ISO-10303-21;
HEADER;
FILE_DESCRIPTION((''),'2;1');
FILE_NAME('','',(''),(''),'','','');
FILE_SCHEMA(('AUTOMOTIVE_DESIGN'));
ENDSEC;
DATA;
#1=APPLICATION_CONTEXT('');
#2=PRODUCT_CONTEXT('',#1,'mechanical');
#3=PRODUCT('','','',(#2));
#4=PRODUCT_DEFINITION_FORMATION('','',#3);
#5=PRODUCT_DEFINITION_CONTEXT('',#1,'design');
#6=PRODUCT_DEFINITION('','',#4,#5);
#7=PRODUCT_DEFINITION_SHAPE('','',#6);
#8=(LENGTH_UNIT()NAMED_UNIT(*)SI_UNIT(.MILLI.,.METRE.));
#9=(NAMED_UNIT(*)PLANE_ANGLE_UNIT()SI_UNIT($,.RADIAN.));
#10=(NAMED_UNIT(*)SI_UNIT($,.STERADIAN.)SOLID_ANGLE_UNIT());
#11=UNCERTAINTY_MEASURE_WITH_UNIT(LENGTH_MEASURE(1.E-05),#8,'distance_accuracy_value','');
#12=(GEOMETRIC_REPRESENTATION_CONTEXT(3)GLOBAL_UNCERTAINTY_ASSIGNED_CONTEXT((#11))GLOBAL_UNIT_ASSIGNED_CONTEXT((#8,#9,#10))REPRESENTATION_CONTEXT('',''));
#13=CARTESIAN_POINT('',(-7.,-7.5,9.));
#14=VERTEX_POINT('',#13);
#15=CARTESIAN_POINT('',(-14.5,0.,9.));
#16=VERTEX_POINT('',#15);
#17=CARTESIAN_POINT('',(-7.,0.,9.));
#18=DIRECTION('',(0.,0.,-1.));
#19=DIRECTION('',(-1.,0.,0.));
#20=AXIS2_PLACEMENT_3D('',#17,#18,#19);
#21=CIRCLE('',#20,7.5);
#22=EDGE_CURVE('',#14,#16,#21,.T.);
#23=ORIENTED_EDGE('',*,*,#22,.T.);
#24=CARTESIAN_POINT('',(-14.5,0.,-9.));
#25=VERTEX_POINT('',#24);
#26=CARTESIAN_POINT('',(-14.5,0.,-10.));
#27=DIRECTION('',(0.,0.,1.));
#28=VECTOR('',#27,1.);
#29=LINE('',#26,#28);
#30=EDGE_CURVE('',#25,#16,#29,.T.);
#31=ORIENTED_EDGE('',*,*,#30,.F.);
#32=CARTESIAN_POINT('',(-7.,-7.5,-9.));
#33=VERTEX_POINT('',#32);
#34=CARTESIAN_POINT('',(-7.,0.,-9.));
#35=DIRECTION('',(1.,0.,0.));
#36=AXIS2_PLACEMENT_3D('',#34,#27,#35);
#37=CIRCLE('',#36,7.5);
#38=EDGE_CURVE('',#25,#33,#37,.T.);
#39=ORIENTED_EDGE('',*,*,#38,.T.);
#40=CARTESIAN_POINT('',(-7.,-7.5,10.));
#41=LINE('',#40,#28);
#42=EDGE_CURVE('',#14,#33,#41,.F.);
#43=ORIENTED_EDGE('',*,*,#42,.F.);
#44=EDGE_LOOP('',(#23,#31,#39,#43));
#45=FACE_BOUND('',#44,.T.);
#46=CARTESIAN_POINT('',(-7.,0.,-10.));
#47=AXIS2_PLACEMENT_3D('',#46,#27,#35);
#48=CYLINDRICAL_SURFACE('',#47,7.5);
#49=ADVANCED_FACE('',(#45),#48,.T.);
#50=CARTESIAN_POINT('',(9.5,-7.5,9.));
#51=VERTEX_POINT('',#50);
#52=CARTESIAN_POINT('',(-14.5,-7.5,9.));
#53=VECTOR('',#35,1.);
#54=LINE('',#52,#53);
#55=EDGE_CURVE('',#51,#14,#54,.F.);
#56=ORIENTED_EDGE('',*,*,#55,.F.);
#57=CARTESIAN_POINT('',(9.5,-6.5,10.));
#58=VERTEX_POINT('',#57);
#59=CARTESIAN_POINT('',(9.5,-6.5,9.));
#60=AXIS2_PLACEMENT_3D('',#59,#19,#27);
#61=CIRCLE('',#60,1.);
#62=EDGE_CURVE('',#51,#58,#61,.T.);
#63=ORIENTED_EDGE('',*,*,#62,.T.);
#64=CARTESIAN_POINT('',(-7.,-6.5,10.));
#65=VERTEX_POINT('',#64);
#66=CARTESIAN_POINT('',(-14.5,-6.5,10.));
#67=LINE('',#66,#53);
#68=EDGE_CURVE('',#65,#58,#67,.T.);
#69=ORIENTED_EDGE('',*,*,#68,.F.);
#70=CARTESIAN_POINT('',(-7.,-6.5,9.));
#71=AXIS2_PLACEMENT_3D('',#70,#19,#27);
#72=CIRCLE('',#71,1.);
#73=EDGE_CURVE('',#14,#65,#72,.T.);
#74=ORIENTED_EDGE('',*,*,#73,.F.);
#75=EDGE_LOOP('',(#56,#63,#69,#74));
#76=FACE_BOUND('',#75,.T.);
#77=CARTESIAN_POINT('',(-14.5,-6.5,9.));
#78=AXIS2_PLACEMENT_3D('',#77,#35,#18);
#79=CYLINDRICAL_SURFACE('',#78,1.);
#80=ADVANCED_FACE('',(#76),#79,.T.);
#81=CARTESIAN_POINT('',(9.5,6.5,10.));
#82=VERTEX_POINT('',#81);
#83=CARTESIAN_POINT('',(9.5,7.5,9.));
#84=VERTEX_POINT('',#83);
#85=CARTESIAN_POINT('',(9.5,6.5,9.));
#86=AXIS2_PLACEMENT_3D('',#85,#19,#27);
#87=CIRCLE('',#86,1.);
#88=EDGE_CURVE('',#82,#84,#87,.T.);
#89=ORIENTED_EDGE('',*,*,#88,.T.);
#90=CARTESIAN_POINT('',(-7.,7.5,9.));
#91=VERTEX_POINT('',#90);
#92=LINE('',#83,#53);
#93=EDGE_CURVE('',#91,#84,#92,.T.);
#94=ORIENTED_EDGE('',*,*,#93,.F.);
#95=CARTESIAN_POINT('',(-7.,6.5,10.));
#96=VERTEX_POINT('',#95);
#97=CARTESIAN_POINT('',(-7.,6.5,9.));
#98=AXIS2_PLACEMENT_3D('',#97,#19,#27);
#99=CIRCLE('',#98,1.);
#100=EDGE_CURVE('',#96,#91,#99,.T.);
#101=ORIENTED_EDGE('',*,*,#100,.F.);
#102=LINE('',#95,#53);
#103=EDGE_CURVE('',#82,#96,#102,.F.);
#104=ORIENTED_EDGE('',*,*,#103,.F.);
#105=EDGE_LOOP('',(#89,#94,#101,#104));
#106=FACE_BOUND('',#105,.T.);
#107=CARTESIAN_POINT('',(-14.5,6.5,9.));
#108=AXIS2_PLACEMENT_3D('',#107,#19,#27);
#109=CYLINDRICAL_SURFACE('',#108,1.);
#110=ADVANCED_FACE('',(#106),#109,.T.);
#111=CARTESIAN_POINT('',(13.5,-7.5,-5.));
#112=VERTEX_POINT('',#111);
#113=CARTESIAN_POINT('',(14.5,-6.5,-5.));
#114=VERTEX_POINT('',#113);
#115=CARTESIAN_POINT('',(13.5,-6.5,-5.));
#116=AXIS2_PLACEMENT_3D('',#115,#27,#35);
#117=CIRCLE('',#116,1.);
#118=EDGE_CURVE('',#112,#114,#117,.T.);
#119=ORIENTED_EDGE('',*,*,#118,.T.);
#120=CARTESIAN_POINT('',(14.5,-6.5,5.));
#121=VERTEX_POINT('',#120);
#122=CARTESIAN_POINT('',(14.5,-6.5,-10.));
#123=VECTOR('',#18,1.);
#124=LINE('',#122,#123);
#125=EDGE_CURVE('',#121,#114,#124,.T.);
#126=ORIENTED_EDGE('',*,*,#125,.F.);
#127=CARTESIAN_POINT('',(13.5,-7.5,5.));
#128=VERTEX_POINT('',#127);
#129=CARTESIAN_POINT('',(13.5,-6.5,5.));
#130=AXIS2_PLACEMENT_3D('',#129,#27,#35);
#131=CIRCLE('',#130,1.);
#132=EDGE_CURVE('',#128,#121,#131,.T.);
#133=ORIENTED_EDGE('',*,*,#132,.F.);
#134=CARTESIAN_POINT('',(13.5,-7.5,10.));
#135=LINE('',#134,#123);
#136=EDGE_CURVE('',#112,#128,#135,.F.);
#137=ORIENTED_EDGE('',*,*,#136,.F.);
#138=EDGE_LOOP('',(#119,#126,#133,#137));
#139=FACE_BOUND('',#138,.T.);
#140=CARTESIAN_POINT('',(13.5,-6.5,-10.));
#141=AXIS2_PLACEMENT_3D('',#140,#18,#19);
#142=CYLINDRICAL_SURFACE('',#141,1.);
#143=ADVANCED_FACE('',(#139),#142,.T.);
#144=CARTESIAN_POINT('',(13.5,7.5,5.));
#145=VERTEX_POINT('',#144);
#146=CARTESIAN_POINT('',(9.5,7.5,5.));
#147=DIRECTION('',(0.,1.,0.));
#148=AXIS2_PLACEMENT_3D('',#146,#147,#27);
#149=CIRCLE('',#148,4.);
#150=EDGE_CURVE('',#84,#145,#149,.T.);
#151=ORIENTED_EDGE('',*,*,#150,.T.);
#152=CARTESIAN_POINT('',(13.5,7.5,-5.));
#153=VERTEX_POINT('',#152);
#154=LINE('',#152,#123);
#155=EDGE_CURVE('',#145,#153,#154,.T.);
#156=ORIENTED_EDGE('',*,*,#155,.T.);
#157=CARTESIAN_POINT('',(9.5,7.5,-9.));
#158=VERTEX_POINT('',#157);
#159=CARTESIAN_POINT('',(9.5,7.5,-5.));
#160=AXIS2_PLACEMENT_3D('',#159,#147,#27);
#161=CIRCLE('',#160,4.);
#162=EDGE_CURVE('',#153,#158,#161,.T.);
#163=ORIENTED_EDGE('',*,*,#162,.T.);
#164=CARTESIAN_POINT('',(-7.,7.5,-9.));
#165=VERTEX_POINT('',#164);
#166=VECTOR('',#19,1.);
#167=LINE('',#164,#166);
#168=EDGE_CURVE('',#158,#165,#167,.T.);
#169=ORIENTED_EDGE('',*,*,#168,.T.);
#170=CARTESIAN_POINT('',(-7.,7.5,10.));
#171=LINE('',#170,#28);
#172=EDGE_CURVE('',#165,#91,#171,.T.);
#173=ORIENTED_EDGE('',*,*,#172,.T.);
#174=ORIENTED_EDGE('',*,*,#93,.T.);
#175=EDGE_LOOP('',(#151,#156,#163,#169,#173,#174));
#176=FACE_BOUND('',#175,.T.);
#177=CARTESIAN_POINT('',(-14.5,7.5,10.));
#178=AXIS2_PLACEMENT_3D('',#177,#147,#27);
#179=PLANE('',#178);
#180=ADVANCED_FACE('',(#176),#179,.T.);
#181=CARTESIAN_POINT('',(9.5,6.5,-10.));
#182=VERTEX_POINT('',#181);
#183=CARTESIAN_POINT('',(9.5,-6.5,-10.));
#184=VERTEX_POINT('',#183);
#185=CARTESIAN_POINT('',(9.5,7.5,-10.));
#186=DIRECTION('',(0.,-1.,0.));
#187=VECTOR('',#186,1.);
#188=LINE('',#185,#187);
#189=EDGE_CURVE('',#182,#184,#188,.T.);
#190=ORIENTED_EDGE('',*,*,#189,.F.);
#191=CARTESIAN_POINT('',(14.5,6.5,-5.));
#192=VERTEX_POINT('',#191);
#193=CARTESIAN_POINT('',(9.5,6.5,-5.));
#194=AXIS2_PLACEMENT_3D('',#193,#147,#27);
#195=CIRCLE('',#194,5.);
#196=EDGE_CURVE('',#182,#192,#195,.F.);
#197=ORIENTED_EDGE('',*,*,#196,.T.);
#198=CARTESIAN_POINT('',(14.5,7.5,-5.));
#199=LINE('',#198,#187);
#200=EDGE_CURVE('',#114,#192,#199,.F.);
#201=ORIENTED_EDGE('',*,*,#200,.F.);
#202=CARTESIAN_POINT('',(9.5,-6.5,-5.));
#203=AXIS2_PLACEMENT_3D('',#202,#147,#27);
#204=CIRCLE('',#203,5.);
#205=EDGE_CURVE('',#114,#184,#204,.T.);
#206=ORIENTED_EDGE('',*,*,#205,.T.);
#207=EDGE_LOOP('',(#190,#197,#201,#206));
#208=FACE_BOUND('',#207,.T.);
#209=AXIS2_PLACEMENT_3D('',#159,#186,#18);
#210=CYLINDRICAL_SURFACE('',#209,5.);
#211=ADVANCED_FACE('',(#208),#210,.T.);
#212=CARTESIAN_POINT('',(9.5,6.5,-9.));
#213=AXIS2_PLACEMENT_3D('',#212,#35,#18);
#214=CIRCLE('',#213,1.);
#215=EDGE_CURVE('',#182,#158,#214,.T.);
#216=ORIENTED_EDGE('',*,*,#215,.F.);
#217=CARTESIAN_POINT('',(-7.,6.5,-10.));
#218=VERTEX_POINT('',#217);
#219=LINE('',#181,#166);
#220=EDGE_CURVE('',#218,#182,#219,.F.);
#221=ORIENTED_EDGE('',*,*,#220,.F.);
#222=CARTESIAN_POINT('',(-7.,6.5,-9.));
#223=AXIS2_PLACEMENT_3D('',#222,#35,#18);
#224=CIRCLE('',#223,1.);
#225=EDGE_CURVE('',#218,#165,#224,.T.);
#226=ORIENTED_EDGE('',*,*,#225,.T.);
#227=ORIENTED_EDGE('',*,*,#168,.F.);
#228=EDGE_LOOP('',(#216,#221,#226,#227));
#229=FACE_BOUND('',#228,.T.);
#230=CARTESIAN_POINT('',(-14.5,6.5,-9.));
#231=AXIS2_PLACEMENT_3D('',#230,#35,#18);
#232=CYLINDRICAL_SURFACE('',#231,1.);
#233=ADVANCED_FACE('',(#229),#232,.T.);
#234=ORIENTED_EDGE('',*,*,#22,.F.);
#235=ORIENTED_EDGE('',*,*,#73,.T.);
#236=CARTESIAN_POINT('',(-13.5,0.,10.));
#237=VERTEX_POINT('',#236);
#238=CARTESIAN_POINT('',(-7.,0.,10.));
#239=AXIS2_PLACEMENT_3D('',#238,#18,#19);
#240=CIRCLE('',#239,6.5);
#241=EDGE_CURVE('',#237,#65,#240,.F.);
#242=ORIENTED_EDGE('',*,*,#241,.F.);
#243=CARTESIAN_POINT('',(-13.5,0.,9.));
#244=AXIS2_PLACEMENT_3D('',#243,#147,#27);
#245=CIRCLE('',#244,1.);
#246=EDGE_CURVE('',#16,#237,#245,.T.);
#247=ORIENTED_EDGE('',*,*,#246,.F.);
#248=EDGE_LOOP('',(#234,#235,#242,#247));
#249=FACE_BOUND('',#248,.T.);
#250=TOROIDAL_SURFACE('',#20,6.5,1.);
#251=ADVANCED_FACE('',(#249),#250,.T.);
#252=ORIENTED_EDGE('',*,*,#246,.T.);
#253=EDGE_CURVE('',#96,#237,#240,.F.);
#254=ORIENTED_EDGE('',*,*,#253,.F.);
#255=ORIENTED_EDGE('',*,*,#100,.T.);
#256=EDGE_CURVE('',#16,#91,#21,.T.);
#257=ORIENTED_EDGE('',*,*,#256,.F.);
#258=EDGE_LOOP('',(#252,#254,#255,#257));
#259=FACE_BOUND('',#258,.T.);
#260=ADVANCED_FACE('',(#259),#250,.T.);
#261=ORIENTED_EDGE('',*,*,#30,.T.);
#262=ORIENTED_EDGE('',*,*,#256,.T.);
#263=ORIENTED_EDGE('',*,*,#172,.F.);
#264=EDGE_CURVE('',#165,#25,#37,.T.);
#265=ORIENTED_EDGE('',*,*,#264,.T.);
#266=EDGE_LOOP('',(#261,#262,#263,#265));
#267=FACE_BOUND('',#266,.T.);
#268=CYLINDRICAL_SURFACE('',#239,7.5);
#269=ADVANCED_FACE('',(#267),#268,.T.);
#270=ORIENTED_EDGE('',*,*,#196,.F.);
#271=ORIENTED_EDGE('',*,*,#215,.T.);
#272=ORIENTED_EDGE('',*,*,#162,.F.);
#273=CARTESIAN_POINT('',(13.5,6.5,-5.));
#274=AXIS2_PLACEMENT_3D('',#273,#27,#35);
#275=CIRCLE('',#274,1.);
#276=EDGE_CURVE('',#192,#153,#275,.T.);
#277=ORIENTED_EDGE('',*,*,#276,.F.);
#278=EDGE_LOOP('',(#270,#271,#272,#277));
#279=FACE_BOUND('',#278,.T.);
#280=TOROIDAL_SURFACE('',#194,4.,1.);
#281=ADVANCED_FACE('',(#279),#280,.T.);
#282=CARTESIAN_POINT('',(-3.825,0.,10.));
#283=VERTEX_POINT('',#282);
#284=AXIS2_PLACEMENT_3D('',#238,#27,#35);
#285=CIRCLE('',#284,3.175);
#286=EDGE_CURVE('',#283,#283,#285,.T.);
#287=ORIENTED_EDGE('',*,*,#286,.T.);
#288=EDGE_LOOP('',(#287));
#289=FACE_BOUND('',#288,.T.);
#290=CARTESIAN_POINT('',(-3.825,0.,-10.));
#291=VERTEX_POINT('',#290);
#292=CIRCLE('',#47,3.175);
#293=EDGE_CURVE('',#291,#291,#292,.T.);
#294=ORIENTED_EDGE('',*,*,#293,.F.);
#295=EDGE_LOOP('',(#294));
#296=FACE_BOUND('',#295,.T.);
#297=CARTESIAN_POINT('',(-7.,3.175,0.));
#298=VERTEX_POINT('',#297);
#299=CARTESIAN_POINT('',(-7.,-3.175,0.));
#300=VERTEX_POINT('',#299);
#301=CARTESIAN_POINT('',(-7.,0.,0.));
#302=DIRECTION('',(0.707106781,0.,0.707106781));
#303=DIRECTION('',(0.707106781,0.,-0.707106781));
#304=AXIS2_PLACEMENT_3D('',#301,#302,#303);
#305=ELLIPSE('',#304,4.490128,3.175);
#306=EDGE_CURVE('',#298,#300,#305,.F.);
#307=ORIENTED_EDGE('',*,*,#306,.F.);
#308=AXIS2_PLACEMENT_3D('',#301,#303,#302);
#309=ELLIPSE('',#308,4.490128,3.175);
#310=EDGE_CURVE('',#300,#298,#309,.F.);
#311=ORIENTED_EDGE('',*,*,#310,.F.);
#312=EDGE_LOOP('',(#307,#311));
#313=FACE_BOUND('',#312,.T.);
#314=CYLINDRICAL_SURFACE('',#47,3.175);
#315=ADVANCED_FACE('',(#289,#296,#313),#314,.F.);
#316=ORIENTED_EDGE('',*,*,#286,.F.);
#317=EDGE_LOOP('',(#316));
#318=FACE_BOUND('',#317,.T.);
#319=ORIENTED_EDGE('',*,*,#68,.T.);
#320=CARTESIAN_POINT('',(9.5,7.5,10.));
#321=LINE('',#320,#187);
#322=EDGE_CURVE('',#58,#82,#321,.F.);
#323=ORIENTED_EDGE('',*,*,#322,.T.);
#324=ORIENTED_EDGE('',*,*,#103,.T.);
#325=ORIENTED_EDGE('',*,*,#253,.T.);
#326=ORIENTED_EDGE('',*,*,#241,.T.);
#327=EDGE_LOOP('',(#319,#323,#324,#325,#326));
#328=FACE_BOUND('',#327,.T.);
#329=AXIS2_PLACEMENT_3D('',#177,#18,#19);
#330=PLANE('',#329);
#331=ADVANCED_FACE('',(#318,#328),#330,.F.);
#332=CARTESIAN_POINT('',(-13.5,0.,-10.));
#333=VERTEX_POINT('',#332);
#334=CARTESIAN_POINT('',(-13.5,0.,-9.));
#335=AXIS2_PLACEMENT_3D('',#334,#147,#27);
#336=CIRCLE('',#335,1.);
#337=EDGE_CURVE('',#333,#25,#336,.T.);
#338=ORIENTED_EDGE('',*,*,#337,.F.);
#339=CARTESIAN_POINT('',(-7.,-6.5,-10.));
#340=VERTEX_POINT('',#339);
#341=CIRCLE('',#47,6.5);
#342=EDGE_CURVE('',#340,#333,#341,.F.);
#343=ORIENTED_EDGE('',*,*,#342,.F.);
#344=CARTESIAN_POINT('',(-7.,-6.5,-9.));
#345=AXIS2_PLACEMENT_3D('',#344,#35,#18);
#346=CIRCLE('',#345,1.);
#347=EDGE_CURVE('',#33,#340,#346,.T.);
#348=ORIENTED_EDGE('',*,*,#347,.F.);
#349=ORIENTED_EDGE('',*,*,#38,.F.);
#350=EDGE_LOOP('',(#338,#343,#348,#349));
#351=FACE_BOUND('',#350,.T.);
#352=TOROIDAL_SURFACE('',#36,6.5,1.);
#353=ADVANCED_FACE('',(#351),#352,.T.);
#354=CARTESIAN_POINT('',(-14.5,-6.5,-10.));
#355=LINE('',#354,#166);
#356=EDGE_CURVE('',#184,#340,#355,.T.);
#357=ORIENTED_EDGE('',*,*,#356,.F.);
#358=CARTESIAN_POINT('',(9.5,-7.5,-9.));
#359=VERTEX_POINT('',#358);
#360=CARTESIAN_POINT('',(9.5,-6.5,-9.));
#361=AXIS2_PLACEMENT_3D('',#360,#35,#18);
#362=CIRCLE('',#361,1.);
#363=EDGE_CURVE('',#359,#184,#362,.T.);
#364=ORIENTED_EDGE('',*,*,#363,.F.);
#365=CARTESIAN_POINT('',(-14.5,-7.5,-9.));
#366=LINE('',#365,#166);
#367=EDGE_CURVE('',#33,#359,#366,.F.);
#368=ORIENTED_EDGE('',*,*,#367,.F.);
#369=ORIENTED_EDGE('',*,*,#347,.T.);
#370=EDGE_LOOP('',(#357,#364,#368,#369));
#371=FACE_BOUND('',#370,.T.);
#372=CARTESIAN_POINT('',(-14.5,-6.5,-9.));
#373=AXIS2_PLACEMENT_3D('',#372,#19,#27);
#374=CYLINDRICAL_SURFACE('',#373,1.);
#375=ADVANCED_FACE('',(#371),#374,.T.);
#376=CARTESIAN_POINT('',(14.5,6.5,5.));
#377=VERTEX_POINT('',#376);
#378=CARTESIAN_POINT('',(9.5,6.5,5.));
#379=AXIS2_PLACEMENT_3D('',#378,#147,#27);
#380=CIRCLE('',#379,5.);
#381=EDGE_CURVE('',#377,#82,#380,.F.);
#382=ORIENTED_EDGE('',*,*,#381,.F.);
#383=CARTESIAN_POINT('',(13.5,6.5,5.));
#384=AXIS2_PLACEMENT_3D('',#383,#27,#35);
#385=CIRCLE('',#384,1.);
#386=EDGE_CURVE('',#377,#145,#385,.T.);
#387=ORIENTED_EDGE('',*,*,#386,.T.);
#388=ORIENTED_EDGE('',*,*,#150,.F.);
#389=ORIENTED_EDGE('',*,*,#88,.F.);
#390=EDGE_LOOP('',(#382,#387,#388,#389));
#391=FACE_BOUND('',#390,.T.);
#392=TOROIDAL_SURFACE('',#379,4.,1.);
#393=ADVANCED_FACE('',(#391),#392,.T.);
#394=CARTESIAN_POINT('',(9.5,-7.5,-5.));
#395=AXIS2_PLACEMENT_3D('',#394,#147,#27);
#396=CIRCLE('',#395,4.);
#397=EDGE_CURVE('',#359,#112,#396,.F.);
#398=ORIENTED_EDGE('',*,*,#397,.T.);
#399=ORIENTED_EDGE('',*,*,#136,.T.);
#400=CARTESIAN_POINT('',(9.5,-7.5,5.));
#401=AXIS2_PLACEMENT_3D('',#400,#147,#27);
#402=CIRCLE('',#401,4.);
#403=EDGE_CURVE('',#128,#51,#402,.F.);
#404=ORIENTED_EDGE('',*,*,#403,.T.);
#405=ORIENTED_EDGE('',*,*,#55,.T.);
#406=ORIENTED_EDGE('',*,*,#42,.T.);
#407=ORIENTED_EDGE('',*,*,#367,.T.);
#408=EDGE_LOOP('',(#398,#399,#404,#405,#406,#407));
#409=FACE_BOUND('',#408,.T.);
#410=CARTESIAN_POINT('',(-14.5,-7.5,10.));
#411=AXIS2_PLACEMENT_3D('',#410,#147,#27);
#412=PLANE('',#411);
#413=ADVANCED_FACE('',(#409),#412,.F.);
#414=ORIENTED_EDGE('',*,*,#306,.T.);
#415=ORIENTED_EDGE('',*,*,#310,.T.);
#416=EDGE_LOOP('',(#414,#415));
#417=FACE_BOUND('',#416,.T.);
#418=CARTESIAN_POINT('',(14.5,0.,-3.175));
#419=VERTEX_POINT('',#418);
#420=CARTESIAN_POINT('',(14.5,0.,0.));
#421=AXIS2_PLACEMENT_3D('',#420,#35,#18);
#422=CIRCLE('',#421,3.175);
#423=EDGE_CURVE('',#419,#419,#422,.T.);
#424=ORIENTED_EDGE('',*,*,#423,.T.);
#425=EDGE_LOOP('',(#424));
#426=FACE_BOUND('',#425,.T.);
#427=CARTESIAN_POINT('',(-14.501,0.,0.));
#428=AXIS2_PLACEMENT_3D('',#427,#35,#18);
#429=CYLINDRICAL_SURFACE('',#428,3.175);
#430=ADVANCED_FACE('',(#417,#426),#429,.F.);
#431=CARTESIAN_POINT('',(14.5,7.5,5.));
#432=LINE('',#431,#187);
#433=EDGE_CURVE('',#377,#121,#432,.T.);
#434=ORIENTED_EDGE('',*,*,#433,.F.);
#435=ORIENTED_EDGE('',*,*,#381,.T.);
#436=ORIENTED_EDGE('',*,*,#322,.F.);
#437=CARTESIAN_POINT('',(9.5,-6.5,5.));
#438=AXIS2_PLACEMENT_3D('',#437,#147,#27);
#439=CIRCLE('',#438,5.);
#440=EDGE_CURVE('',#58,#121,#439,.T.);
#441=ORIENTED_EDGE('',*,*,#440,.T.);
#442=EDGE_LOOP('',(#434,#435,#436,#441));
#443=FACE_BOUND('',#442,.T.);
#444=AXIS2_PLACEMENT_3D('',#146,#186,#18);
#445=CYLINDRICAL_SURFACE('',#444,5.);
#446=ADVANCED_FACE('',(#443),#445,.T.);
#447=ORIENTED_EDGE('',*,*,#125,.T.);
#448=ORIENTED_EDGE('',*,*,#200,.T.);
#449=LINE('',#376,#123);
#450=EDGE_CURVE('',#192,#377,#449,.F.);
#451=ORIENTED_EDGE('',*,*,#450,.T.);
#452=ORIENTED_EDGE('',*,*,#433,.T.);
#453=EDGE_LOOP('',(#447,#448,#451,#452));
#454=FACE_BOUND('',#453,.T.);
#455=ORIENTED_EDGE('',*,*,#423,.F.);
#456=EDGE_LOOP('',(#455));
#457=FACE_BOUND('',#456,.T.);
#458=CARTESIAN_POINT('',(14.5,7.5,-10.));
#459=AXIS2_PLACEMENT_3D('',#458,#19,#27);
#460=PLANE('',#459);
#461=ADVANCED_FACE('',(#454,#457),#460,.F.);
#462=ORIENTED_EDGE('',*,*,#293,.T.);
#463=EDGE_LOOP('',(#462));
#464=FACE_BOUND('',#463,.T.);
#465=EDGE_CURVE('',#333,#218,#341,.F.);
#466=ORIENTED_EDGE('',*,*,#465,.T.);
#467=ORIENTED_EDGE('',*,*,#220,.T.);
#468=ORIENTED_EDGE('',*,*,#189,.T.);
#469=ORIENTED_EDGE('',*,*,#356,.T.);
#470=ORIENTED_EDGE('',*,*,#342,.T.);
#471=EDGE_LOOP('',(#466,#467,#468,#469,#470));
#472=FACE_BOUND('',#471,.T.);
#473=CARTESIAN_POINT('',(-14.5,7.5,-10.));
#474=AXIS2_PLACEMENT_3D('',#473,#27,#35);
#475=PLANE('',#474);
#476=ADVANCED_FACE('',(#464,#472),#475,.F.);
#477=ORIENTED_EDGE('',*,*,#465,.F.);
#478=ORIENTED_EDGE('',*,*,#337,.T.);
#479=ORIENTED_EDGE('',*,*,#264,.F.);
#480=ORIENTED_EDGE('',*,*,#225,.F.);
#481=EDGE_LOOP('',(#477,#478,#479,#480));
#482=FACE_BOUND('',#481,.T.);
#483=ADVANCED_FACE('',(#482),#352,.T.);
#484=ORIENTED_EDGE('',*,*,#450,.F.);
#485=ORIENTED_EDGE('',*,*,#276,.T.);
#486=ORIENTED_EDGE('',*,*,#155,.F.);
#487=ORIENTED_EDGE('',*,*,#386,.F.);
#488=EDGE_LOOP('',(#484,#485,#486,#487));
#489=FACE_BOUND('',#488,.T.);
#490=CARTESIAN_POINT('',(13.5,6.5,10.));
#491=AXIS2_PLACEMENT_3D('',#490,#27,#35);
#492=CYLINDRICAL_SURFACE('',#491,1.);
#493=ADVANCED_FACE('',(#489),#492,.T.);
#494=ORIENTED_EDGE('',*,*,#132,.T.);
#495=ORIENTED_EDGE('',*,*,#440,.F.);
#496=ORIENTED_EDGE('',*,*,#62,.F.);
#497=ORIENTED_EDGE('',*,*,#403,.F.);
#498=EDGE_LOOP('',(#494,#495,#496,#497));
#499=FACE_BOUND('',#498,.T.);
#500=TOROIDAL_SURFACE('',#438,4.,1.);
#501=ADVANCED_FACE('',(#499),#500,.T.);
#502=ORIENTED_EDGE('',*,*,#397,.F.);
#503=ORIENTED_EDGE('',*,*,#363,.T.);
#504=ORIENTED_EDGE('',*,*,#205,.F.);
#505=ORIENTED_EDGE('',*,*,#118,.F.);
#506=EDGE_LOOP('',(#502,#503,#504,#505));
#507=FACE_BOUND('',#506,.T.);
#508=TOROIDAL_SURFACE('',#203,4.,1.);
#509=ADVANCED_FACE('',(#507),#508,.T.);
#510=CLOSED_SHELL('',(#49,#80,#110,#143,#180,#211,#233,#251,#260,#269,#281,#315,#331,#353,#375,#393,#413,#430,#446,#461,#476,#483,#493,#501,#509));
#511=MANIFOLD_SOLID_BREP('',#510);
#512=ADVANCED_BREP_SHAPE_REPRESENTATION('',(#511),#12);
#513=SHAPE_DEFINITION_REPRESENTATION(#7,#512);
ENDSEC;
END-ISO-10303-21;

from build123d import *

# Parameters (mm, degrees)
SKETCH1_W               = 29
SKETCH1_H               = 20
BOSS_EXTRUDE1_DEPTH     = 7.5
SKETCH2_R               = 3.175
CUT_EXTRUDE1_DEPTH      = 26.816661287
FILLET2_R               = 7.5
CUT_EXTRUDE2_REACH      = 33.579
CUT_EXTRUDE2_END_RADIUS = 3.175
SKETCH3_R               = 3.175
FILLET3_R               = 5
FILLET4_R               = 1


with BuildPart() as part:
    # Sketch1 → Boss-Extrude1 (new, symmetric)
    with BuildSketch(Plane(origin=(0, 0, 0), x_dir=(1, 0, 0), z_dir=(0, 1, 0))):
        Rectangle(SKETCH1_W, SKETCH1_H)
    extrude(amount=BOSS_EXTRUDE1_DEPTH, both=True)

    # Sketch2 → Cut-Extrude1 (cut, through all)
    with BuildSketch(Plane.XY.offset(10)):
        with Locations((-7, 0)):
            Circle(SKETCH2_R)
    extrude(amount=-CUT_EXTRUDE1_DEPTH, mode=Mode.SUBTRACT)

    # Fillet2
    fillet2_edges = [part.edges().sort_by_distance(p)[0] for p in [
        (-14.5, 7.5, 0),
        (-14.5, -7.5, 0),
    ]]
    fillet(fillet2_edges, radius=FILLET2_R - 0.0001)  # a hair under: the kernel refuses the full size

    # Cut-Extrude2: up to this cylinder (the profile starts outside it)
    cut_extrude2_end = Plane(origin=(-7, 0, 0), z_dir=(0, 0, 1)) * Cylinder(CUT_EXTRUDE2_END_RADIUS, 74.508, mode=Mode.PRIVATE)
    # Sketch3 → Cut-Extrude2 (cut, up to the surface)
    with BuildSketch(Plane(origin=(14.5, 0, 0), x_dir=(0, 0, -1), z_dir=(1, 0, 0)), mode=Mode.PRIVATE) as cut_extrude2_sk1:
        Circle(SKETCH3_R)
    cut_extrude2_tool1 = extrude(cut_extrude2_sk1.sketch, amount=-CUT_EXTRUDE2_REACH, mode=Mode.PRIVATE) - cut_extrude2_end
    add(cut_extrude2_tool1.solids().sort_by_distance((14.5, 0, 0))[0], mode=Mode.SUBTRACT)

    # Fillet3
    fillet3_edges = [part.edges().sort_by_distance(p)[0] for p in [
        (14.5, 0, -10),
        (14.5, 0, 10),
    ]]
    fillet(fillet3_edges, radius=FILLET3_R)

    # Fillet4
    fillet4_edges = [part.edges().sort_by_distance(p)[0] for p in [
        (1.24995, 7.5, 10),
        (1.24995, -7.5, 10),
        (-12.303330148, -5.303330148, 10),
        (-12.303330148, 5.303330148, 10),
        (-12.303330148, -5.303330148, -10),
        (-12.303330148, 5.303330148, -10),
        (1.24995, 7.5, -10),
        (1.24995, -7.5, -10),
        (14.5, -7.5, 0),
        (13.035533906, -7.5, 8.535533906),
        (13.035533906, -7.5, -8.535533906),
        (14.5, 7.5, 0),
        (13.035533906, 7.5, 8.535533906),
        (13.035533906, 7.5, -8.535533906),
    ]]
    fillet(fillet4_edges, radius=FILLET4_R)


solid = part.part
